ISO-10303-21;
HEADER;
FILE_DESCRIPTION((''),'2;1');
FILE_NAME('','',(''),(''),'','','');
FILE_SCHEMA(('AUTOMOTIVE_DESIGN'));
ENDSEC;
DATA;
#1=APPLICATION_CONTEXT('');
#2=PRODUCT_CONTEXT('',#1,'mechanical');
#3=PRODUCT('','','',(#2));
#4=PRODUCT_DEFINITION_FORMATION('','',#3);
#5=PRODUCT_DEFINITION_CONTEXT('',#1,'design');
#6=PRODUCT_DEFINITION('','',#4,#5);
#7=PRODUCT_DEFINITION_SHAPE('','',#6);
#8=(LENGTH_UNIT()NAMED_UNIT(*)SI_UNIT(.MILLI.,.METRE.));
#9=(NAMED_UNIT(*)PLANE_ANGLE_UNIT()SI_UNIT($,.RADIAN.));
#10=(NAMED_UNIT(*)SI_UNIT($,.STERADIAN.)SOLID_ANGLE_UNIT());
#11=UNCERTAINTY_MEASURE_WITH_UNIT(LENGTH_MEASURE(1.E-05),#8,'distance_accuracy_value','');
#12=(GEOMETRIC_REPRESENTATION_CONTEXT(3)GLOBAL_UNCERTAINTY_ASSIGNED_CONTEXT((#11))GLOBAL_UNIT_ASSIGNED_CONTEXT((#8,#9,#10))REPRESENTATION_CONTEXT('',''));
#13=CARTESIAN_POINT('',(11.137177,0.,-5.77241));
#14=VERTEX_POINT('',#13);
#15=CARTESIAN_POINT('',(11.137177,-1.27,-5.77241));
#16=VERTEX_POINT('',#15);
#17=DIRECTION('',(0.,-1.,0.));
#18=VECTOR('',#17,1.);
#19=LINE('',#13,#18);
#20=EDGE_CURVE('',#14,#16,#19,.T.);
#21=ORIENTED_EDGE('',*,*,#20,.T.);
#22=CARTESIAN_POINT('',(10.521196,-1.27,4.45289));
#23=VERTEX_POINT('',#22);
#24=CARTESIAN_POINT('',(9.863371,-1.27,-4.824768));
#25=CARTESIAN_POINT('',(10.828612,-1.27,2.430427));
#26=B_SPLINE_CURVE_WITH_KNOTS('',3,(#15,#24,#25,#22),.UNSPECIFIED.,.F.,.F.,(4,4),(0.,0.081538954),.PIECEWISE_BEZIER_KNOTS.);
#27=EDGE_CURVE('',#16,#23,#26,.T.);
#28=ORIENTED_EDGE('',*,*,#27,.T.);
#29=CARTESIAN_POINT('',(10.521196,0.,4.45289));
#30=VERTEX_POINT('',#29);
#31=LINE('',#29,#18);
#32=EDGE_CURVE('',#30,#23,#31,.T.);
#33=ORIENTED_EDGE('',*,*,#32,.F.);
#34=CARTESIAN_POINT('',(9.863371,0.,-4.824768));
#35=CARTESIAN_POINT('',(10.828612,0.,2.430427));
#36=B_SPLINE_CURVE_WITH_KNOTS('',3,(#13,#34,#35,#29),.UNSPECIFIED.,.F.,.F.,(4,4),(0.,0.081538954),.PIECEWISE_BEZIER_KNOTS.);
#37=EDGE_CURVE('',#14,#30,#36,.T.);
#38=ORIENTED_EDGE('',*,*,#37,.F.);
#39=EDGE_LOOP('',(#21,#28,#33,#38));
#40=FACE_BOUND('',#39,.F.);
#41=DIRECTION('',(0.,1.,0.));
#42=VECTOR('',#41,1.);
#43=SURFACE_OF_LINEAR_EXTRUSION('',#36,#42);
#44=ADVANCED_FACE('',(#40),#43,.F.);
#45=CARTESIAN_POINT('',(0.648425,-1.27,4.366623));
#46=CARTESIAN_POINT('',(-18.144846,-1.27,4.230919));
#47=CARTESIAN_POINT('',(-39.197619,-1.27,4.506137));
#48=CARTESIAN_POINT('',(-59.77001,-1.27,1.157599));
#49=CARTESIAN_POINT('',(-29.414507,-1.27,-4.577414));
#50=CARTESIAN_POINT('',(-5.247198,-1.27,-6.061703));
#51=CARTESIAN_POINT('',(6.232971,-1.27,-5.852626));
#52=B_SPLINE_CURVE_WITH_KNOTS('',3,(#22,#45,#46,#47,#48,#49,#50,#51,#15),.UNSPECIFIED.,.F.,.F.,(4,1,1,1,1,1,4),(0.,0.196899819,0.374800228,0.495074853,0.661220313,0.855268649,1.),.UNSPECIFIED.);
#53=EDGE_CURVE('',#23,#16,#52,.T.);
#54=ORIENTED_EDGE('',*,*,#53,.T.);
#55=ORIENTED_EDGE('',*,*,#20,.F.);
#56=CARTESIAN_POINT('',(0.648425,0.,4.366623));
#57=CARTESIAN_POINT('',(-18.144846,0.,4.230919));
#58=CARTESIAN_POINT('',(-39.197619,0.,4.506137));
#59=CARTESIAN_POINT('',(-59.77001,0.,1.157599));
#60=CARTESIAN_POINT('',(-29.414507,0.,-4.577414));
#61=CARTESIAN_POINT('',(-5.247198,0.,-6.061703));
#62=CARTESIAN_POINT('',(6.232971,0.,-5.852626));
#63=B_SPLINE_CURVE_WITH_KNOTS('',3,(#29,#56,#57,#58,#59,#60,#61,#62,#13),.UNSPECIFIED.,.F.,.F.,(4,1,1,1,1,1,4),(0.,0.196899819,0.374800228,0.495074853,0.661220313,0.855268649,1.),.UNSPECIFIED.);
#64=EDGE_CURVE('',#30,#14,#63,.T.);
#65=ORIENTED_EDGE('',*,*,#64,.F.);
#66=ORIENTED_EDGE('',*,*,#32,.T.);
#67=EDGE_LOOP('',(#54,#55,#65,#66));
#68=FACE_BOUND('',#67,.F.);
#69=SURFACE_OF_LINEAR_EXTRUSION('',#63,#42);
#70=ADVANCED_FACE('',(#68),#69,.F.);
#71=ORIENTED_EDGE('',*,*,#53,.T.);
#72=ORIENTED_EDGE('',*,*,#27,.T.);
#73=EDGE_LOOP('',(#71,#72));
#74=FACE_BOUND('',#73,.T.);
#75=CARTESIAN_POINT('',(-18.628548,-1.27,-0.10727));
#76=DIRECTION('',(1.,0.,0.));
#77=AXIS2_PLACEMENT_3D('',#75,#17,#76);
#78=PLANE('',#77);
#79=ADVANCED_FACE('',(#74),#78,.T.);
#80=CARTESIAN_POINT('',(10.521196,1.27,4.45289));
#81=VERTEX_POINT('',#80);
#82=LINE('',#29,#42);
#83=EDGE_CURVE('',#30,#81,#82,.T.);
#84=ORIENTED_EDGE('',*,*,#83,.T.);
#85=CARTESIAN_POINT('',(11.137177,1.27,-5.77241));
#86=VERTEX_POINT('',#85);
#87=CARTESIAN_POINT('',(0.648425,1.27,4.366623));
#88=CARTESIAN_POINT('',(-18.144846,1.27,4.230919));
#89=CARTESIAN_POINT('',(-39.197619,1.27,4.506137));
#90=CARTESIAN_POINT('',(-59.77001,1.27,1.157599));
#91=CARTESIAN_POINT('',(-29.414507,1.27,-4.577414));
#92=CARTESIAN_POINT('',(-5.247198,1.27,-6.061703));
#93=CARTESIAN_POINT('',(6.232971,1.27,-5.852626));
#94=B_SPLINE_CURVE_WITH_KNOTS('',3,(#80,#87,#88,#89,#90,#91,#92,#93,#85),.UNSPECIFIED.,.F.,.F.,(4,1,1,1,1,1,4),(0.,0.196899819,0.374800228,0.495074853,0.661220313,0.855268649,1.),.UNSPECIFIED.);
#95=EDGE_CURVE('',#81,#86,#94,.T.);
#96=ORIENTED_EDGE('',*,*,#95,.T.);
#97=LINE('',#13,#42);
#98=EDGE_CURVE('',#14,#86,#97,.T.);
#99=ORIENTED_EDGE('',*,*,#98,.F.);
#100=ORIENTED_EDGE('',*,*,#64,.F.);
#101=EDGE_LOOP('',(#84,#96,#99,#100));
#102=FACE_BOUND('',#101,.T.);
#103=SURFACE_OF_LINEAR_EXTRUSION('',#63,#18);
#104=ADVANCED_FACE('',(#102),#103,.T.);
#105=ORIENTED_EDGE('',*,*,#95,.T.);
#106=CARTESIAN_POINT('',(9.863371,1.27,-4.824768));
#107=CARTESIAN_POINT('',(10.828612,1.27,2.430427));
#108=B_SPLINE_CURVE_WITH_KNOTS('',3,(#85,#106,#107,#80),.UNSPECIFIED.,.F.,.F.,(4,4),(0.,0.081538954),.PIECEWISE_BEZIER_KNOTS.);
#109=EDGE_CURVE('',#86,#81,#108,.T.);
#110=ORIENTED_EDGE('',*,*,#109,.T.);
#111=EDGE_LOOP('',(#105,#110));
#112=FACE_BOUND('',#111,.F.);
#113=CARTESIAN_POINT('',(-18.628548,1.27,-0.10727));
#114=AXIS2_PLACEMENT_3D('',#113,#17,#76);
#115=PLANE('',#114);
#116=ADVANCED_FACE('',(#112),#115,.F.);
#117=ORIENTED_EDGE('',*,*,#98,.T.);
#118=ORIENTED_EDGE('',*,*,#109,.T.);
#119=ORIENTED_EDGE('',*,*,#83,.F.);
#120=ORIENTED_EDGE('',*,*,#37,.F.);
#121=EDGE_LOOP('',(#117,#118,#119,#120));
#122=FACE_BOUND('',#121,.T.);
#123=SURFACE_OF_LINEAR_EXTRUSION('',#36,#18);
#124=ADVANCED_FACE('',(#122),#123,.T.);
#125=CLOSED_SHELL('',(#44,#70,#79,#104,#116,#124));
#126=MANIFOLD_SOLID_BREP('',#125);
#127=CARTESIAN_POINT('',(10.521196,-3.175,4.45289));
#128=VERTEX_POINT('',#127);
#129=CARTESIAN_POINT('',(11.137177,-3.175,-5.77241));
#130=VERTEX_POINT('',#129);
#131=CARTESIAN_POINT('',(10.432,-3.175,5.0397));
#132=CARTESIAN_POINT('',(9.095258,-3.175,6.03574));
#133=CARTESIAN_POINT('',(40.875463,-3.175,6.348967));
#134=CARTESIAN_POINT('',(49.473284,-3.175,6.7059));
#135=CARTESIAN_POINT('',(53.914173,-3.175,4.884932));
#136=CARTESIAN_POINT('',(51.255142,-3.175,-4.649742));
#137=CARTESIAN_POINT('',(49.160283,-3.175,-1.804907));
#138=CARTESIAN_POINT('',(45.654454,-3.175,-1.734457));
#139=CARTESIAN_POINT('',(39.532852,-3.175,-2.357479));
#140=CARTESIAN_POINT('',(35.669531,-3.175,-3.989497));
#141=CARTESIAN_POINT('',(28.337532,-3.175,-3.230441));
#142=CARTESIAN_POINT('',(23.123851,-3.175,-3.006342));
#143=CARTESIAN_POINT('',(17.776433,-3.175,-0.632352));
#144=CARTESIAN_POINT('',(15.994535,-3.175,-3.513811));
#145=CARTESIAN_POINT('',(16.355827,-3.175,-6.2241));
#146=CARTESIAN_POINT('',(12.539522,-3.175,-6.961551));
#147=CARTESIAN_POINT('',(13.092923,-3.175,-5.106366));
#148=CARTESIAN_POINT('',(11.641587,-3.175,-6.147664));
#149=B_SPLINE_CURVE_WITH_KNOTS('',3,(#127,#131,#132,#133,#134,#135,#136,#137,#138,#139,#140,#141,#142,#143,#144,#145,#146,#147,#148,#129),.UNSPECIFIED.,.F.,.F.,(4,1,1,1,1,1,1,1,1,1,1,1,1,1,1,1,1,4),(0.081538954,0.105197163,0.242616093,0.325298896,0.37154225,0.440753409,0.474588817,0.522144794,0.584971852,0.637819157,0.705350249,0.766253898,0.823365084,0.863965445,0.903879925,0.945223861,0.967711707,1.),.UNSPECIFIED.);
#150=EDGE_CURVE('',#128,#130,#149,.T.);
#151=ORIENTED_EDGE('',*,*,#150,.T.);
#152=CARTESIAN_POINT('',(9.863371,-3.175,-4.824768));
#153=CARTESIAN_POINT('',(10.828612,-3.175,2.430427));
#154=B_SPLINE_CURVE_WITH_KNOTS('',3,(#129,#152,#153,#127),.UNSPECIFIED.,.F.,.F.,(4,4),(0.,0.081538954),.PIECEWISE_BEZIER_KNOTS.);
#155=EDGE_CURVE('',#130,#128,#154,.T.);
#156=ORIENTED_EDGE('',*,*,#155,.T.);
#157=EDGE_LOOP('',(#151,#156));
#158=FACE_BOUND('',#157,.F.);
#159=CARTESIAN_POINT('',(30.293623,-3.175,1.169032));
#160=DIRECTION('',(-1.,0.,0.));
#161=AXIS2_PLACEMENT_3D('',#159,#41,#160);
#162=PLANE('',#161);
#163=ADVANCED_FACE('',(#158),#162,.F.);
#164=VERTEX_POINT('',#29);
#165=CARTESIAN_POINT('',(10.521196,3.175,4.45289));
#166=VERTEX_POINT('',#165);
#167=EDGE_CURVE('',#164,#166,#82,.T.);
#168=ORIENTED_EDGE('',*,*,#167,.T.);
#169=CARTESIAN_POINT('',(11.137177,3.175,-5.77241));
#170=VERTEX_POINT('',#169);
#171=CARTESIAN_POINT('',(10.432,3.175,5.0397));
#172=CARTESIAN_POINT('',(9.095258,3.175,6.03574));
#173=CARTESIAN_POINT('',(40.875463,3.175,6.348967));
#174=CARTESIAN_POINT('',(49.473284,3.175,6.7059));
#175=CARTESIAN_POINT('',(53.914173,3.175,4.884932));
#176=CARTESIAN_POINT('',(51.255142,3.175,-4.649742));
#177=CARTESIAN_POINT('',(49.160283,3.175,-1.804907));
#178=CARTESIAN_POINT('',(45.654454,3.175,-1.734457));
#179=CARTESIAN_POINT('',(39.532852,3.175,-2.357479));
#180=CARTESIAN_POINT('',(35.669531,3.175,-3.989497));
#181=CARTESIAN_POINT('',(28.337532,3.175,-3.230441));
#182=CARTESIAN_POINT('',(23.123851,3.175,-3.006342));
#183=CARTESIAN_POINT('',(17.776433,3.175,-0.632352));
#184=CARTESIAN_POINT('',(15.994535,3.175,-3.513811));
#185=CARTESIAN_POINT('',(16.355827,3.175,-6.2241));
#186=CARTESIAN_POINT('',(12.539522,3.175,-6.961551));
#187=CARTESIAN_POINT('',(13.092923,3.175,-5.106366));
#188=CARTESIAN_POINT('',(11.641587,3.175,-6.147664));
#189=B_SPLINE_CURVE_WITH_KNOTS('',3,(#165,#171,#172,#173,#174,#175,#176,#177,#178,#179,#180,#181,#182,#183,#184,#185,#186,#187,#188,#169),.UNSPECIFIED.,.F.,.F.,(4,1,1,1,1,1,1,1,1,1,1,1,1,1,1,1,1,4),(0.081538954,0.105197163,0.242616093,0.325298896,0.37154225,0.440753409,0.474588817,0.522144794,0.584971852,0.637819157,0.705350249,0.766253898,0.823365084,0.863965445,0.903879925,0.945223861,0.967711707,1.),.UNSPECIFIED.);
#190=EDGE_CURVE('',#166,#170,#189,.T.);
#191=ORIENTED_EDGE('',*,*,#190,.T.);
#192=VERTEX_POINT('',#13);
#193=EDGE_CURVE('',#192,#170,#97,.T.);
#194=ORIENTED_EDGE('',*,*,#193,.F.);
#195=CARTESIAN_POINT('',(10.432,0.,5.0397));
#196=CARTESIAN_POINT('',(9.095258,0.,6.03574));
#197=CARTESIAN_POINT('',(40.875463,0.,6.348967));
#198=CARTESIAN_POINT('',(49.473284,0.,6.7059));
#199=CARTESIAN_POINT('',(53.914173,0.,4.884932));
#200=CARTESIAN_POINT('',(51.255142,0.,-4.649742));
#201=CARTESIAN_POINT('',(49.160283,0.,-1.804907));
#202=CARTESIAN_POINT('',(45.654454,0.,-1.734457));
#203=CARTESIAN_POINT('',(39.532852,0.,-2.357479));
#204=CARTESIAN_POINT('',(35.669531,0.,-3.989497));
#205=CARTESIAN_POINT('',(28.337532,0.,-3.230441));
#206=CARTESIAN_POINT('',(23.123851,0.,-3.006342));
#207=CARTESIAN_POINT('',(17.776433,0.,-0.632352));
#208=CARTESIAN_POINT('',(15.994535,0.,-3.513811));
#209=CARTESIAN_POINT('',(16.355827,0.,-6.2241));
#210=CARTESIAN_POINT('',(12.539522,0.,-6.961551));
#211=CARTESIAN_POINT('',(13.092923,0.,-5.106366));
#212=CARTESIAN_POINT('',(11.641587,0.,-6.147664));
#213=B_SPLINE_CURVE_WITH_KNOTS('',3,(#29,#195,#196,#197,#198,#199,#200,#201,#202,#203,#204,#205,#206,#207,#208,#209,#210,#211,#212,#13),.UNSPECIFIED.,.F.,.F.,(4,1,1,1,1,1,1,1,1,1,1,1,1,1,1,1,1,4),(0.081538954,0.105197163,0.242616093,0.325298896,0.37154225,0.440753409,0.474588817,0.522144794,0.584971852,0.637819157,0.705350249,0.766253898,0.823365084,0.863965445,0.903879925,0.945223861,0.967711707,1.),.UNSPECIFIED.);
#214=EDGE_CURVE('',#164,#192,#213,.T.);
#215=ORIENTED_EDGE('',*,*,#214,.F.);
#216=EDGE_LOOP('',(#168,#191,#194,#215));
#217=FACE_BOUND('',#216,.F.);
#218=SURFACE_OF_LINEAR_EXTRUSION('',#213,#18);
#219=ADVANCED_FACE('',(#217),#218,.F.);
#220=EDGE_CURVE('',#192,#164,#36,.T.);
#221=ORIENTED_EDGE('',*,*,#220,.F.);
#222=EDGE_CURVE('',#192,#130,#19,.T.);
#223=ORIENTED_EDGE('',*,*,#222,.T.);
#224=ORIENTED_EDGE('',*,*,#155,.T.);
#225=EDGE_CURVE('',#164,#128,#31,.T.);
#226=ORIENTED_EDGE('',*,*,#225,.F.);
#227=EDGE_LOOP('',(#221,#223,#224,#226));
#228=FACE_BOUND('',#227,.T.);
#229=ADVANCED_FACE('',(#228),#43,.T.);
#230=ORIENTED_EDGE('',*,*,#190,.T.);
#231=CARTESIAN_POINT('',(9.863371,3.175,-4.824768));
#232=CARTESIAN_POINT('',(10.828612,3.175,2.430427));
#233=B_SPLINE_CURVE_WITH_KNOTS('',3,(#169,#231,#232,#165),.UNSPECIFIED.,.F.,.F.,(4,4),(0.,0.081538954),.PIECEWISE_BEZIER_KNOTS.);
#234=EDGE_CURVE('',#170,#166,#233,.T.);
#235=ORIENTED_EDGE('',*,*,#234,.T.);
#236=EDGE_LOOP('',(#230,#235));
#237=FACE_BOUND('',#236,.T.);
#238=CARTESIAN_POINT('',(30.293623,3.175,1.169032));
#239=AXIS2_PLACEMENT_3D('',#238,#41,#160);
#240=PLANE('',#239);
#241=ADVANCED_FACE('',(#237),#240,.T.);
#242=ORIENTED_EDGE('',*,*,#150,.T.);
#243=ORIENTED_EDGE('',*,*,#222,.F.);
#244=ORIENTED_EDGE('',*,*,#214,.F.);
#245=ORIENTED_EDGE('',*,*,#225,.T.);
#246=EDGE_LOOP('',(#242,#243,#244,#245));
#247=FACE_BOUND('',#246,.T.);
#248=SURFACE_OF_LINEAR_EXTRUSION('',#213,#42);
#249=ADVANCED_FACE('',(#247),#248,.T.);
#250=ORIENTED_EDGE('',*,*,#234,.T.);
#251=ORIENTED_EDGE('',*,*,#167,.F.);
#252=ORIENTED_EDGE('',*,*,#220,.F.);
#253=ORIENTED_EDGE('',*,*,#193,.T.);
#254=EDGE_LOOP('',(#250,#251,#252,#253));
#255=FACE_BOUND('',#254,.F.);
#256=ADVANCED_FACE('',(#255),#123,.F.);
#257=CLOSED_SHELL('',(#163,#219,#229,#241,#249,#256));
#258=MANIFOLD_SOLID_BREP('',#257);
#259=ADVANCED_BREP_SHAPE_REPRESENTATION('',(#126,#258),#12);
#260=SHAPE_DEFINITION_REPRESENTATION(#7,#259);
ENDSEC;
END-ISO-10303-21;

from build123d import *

# Parameters (mm, degrees)
F1_DEPTH = 3.175
F2_DEPTH = 1.27


# Not quite as in the source:
# - a feature names something its author has since deleted; it is built from what else it names


with BuildPart() as f1:
    # F0 (on Front) → F1 (new body, symmetric)
    with BuildSketch(Plane.XZ):
        with BuildLine():
            add(Edge.make_bspline(
                [(11.1371772364, -5.7724104263), (9.8633713226, -4.8247675972), (10.8286121975, 2.430426847), (10.5211958289, 4.4528897852)],
                knots=[0, 0, 0, 0, 0.0815389543, 0.0815389543, 0.0815389543, 0.0815389543], degree=3))
            add(Edge.make_bspline(
                [(10.5211958289, 4.4528897852), (10.4320001713, 5.0396995004), (9.095258314, 6.035740183), (40.8754630173, 6.3489667059), (49.4732836858, 6.7059004077), (53.9141732937, 4.8849321277), (51.2551424038, -4.6497415166), (49.1602833702, -1.8049068404), (45.6544543574, -1.7344569531), (39.5328517037, -2.3574791172), (35.6695305458, -3.9894974099), (28.3375317285, -3.2304414165), (23.1238506636, -3.006341842), (17.7764330461, -0.6323517487), (15.9945351129, -3.5138109738), (16.3558266304, -6.2240997641), (12.5395223866, -6.9615509617), (13.0929226507, -5.1063664031), (11.6415866883, -6.1476638263), (11.1371772364, -5.7724104263)],
                knots=[0.0815389543, 0.0815389543, 0.0815389543, 0.0815389543, 0.1051971631, 0.2426160928, 0.3252988962, 0.3715422501, 0.4407534093, 0.4745888175, 0.5221447944, 0.5849718523, 0.6378191575, 0.7053502486, 0.7662538979, 0.8233650841, 0.8639654446, 0.9038799254, 0.9452238609, 0.9677117065, 1, 1, 1, 1], degree=3))
        make_face()
    extrude(amount=F1_DEPTH, both=True)


with BuildPart() as f2:
    # F0 (on Front) → F2 (new body, symmetric)
    with BuildSketch(Plane.XZ):
        with BuildLine():
            add(Edge.make_bspline(
                [(10.5211958289, 4.4528897852), (0.6484246724, 4.3666230029), (-18.1448455868, 4.2309187987), (-39.1976188833, 4.5061369229), (-59.7700102657, 1.1575986861), (-29.4145074355, -4.5774135742), (-5.2471983118, -6.0617033098), (6.2329714332, -5.8526263684), (11.1371772364, -5.7724104263)],
                knots=[0, 0, 0, 0, 0.1968998186, 0.3748002279, 0.4950748533, 0.6612203133, 0.8552686491, 1, 1, 1, 1], degree=3))
            add(Edge.make_bspline(
                [(11.1371772364, -5.7724104263), (9.8633713226, -4.8247675972), (10.8286121975, 2.430426847), (10.5211958289, 4.4528897852)],
                knots=[0, 0, 0, 0, 0.0815389543, 0.0815389543, 0.0815389543, 0.0815389543], degree=3))
        make_face()
    extrude(amount=F2_DEPTH, both=True)


solid = Compound([f1.part, f2.part])
